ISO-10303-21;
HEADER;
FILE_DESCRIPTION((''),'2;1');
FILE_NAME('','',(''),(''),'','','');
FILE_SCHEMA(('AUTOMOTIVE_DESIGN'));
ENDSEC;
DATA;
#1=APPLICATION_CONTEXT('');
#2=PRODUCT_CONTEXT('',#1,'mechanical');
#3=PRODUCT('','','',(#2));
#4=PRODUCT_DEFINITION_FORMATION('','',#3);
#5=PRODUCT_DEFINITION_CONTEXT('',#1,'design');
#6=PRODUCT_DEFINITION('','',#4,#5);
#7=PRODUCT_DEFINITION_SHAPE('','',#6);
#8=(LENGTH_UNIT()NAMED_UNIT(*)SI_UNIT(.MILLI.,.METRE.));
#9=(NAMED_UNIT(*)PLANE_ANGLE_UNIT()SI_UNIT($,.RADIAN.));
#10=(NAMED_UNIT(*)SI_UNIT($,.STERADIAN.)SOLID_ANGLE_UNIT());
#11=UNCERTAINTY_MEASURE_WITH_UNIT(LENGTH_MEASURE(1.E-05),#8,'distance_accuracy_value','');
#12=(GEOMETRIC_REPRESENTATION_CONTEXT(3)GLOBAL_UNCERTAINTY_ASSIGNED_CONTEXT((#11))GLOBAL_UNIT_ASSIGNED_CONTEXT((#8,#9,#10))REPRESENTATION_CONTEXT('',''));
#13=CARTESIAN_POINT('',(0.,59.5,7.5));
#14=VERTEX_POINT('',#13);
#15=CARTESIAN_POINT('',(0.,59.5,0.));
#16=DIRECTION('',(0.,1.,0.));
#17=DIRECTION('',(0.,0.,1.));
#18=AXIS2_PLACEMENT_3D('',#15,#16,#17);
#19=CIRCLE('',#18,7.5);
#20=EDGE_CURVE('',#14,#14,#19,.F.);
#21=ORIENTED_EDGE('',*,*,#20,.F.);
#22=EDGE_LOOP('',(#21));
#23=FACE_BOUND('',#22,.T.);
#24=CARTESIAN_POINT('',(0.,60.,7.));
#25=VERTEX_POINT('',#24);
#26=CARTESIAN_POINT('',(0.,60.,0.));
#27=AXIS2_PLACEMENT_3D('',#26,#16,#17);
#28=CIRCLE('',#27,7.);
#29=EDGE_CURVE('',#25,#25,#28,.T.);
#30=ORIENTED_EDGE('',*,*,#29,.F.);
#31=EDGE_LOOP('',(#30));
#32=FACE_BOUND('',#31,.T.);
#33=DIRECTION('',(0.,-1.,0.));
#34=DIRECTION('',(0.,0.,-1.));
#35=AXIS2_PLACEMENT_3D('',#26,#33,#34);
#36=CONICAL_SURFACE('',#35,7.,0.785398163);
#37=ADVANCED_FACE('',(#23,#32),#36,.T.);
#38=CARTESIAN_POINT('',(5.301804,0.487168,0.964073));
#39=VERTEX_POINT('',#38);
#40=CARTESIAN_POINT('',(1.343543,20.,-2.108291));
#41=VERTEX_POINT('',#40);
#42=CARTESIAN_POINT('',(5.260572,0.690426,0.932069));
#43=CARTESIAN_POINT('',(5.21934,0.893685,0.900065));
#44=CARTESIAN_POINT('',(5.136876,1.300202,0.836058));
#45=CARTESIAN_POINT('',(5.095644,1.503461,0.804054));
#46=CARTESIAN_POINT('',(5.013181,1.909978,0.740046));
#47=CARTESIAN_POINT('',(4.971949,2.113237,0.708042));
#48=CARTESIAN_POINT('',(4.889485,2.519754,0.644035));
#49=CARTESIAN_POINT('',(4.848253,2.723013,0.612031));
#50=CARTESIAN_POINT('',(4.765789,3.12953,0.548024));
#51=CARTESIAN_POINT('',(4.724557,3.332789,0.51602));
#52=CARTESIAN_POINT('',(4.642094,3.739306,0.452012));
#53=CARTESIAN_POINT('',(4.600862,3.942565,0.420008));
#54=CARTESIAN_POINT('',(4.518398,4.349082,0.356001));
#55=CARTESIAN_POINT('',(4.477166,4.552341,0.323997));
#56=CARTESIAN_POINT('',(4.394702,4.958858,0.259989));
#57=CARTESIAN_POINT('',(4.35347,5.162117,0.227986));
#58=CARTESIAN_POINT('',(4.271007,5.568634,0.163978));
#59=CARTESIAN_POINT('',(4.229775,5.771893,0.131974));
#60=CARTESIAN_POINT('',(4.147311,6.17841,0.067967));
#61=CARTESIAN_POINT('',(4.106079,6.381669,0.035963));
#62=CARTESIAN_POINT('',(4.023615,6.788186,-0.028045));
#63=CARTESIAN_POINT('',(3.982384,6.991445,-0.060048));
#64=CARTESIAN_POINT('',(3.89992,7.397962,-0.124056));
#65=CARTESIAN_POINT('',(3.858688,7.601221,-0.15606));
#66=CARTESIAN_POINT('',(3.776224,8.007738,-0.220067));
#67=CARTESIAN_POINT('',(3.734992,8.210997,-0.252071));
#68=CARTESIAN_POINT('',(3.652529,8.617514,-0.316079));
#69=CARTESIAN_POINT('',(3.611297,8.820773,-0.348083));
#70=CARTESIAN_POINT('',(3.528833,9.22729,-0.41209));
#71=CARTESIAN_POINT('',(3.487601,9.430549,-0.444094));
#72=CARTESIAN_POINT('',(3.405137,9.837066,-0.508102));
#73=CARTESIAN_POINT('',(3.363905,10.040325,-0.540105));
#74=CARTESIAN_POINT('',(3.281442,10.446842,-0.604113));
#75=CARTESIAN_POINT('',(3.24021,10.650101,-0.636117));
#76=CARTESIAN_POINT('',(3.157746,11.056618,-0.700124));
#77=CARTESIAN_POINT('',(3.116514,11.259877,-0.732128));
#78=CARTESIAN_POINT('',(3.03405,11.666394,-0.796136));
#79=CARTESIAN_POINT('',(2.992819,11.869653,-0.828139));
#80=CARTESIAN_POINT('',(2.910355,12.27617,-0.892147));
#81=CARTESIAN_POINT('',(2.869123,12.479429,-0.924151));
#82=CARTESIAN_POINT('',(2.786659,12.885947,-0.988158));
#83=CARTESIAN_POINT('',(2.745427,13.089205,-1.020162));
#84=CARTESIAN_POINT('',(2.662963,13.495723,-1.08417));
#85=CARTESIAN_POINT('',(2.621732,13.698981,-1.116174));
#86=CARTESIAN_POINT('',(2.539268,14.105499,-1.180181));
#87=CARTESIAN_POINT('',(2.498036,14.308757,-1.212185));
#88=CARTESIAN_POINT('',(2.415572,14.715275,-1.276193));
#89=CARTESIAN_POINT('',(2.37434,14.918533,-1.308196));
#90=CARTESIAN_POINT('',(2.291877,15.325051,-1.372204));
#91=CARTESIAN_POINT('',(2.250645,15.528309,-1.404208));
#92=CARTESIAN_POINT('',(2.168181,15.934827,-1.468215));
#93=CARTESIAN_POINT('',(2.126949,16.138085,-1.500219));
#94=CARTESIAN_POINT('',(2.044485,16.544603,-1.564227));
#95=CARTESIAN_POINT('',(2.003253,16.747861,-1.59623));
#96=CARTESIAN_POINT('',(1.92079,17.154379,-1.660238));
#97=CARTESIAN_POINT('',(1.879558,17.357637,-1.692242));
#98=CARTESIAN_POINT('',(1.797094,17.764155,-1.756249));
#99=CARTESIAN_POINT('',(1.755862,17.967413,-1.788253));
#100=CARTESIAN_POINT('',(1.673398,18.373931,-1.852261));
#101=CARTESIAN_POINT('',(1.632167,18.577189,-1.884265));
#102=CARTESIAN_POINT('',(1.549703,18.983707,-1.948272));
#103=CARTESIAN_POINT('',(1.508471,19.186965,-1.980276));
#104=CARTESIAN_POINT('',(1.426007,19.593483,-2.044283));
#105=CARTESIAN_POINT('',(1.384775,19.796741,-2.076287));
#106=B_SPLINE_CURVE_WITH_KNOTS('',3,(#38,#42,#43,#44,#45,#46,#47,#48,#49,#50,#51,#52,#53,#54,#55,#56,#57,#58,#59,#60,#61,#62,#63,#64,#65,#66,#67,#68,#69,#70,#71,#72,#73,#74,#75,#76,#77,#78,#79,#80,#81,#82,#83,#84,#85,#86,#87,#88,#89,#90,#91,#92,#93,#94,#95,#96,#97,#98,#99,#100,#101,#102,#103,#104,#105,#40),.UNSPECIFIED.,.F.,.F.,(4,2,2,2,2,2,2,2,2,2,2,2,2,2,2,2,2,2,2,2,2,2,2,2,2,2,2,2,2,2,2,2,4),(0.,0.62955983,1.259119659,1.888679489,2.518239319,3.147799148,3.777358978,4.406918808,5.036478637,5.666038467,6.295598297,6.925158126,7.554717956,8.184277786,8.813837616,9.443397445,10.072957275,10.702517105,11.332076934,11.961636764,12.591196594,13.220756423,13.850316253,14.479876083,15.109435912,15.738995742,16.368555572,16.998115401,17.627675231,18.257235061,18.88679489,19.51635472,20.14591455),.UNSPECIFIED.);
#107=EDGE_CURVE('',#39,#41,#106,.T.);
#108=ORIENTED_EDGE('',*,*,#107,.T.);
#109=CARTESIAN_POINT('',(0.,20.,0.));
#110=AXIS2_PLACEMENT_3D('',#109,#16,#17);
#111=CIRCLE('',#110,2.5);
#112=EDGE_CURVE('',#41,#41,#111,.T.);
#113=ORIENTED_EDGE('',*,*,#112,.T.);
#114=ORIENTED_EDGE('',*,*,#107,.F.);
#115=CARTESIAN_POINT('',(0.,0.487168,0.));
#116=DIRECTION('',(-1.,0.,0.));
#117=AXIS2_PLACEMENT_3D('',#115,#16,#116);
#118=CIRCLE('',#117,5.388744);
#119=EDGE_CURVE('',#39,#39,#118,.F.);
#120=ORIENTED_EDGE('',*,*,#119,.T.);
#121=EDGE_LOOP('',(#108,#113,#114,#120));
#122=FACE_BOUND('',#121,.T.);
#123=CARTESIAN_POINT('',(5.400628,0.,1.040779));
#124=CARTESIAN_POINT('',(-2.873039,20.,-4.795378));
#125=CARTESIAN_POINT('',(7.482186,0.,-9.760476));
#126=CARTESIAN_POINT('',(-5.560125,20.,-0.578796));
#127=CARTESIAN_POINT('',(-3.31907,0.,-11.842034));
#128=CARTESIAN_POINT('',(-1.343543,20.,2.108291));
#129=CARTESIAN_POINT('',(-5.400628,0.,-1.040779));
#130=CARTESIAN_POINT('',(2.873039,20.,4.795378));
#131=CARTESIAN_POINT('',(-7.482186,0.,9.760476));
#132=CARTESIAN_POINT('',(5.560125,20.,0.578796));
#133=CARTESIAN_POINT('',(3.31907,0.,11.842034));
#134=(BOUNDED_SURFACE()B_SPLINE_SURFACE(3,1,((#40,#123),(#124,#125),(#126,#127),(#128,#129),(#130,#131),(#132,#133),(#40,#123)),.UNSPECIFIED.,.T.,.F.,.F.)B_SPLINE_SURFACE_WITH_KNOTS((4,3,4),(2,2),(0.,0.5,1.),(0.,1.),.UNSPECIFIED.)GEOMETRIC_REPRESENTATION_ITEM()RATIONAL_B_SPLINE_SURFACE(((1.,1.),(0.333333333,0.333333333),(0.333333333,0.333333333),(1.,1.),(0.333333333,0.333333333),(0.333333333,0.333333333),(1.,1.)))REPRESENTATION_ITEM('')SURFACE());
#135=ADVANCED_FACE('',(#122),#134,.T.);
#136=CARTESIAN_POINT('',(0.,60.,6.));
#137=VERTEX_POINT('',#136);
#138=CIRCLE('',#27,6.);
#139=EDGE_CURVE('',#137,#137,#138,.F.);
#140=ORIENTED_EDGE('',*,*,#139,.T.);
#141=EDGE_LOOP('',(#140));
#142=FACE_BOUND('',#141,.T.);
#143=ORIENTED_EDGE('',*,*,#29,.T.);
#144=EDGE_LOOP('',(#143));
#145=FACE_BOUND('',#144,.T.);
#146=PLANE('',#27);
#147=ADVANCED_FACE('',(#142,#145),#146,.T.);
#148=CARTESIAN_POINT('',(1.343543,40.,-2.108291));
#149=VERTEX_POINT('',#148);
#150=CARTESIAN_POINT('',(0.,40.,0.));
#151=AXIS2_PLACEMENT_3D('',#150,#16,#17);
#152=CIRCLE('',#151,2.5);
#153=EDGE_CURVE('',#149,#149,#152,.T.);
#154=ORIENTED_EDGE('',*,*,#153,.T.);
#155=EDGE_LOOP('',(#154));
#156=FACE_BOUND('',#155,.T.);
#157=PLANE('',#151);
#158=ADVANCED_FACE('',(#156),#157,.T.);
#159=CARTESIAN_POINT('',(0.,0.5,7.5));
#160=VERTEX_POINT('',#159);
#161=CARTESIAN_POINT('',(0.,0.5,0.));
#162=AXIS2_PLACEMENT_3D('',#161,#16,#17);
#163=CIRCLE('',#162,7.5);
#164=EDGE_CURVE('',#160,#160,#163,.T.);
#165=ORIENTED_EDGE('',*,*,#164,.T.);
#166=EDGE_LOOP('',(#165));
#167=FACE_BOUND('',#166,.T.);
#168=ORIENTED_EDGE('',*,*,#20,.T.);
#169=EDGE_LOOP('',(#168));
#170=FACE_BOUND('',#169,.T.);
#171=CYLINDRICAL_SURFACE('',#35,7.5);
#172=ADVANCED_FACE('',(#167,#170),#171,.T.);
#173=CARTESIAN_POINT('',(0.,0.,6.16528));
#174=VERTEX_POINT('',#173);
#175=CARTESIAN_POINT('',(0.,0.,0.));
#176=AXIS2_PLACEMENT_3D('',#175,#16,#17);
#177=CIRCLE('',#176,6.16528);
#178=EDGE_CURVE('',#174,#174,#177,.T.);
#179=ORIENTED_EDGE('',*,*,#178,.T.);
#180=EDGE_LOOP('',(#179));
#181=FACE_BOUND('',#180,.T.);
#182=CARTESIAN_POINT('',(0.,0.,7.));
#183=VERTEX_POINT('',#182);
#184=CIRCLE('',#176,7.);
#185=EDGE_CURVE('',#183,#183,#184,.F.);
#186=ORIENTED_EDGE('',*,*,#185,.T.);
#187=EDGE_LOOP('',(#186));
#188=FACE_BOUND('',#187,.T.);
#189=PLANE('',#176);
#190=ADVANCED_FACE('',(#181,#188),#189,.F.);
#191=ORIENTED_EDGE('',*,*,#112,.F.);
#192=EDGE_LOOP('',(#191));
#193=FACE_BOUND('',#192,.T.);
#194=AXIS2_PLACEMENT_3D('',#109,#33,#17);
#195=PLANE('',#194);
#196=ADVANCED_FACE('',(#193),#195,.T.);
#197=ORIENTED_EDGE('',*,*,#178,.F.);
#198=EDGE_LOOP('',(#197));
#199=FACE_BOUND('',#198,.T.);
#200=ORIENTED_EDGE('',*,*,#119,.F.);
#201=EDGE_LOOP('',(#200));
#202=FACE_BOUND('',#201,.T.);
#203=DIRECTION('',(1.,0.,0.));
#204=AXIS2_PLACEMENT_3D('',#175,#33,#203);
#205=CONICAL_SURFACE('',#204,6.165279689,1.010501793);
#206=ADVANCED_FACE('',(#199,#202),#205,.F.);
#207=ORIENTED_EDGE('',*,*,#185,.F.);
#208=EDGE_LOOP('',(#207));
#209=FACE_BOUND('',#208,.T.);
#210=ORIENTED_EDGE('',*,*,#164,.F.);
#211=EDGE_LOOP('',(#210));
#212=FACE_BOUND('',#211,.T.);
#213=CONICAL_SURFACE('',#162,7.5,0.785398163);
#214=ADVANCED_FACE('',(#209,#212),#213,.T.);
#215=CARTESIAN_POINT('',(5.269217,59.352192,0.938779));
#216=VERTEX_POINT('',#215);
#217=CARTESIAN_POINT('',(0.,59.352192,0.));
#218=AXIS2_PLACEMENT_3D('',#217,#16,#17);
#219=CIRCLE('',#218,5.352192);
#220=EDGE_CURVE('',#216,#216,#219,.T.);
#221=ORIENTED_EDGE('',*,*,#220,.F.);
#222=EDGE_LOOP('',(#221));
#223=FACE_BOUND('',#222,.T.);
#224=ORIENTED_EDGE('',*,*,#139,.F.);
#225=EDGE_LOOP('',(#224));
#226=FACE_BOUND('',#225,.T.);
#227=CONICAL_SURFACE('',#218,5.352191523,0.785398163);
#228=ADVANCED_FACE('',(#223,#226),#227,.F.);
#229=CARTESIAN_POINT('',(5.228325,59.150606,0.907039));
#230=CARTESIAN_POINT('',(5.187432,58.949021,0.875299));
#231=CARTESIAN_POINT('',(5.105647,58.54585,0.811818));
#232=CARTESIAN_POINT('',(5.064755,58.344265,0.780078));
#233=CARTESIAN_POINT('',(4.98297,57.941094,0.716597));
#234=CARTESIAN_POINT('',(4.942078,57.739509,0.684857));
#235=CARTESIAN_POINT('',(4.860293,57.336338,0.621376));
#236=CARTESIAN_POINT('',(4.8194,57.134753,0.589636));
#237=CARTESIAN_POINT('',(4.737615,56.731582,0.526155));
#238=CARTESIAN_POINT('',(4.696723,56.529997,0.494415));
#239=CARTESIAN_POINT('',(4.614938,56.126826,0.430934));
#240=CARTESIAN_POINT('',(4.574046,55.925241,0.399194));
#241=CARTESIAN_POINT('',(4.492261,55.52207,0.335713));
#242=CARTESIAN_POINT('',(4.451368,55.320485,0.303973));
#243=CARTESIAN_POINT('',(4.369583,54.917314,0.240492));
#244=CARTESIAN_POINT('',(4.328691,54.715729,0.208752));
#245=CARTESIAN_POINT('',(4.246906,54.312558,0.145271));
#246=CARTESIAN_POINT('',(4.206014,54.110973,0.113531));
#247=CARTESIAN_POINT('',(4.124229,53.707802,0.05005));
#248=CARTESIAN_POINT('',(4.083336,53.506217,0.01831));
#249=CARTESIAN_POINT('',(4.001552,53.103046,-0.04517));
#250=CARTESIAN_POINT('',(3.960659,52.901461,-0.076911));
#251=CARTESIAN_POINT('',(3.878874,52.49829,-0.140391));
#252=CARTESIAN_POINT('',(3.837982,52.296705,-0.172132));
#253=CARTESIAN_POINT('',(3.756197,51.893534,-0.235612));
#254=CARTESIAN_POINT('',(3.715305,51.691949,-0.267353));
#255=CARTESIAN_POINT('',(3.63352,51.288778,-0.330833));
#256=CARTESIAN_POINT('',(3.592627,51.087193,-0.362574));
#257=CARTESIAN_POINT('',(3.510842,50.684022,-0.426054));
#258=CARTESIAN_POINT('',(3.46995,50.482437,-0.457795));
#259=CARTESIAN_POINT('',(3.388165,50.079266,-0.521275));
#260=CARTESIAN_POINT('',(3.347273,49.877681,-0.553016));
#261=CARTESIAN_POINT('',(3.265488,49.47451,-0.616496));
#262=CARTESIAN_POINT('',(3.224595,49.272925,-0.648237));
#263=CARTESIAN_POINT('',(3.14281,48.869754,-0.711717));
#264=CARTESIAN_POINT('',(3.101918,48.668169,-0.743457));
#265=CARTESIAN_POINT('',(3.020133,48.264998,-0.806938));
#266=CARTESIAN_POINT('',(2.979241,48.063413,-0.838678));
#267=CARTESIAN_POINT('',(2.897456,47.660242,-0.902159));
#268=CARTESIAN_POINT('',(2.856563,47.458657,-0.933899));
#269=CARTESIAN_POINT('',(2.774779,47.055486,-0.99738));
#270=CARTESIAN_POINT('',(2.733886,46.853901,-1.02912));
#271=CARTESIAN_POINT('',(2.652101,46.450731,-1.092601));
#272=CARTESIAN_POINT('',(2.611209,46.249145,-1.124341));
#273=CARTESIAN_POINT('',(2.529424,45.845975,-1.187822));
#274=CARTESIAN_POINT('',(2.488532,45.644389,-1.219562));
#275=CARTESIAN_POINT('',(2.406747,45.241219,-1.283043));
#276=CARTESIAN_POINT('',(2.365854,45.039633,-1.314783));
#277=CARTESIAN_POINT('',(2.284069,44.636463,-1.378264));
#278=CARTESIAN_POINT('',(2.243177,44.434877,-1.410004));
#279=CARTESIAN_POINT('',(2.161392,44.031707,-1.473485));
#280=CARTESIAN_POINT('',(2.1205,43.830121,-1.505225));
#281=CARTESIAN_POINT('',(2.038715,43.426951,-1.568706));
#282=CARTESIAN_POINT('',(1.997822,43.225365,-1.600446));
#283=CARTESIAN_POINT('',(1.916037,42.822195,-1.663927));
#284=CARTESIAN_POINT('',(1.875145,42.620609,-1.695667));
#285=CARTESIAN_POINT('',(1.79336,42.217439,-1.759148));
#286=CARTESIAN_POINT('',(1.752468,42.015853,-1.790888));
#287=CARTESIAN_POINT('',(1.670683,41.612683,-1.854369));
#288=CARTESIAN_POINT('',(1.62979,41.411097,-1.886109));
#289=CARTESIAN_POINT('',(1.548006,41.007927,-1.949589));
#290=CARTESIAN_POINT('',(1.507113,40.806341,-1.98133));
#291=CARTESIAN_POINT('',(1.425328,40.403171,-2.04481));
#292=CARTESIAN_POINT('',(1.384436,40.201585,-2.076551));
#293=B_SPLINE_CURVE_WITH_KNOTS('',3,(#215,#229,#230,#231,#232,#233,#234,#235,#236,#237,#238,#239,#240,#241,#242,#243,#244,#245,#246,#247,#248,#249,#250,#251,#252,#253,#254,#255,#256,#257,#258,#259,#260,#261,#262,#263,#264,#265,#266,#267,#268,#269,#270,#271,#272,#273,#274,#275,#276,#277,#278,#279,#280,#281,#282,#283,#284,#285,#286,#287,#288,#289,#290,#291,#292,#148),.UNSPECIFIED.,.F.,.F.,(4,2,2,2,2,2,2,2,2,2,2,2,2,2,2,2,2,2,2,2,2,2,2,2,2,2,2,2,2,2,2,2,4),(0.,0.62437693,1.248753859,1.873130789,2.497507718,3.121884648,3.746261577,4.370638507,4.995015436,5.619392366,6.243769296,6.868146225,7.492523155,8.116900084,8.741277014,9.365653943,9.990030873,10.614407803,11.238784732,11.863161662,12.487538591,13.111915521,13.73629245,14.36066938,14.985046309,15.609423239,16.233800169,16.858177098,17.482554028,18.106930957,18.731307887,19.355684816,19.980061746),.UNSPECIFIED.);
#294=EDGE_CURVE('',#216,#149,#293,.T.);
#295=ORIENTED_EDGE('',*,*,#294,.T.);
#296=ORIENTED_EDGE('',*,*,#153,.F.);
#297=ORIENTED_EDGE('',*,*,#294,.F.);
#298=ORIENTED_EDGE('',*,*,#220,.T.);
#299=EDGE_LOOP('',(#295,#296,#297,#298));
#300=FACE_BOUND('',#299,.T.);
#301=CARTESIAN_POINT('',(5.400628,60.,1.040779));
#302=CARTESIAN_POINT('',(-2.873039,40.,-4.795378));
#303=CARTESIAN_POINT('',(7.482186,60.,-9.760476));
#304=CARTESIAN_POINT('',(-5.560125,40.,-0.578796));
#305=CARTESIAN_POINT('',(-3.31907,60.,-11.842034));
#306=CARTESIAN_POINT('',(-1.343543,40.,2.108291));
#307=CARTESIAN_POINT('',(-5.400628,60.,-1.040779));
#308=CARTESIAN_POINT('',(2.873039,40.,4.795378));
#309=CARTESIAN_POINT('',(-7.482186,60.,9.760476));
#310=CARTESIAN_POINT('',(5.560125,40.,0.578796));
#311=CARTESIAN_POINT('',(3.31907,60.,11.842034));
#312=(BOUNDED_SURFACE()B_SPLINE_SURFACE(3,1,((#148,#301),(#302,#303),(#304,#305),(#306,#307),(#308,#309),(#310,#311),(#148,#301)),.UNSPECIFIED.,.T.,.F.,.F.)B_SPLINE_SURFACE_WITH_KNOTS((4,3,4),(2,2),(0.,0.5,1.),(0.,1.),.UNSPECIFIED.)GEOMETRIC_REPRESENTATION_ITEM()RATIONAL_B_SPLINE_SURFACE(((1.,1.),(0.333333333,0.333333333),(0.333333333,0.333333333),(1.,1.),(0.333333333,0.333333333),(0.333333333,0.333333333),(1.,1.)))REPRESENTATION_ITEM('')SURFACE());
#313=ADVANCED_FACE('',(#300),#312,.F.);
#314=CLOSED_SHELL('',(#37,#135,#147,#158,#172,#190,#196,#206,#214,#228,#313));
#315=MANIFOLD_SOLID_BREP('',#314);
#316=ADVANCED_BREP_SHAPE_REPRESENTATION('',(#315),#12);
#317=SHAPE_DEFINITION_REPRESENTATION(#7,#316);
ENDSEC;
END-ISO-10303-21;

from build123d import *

# Parameters (mm, degrees)
CROQUIS1_R              = 7.5
SALIENTE_EXTRUIR1_DEPTH = 60
CHAFL_N2_SIZE           = 0.5
CHAFL_N2_SIZE_2         = 0.665279689


with BuildPart() as part:
    # Croquis1 → Saliente-Extruir1 (new body)
    with BuildSketch(Plane(origin=(0, 0, 0), x_dir=(1, 0, 0), z_dir=(0, 1, 0))):
        with Locations(Location((0, 0, 0), (0, 0, 270))):
            Circle(CROQUIS1_R)
    extrude(amount=SALIENTE_EXTRUIR1_DEPTH)

    # Cortar-Recubrir2: read off the stored shape, not the designer's step
    # Cortar-Recubrir2: loft between two sections, ruled curve by curve
    cortar_recubrir2_from = [
        Edge.make_bspline([(1.343543407, 40, -2.108291041), (-2.873038675, 40, -4.795377855), (-5.560125489, 40, -0.578795773), (-1.343543407, 40, 2.108291041), (2.873038675, 40, 4.795377855), (5.560125489, 40, 0.578795773), (1.343543407, 40, -2.108291041)], [0, 0, 0, 0, 0.5, 0.5, 0.5, 1, 1, 1, 1], 3, [1, 0.333333333, 0.333333333, 1, 0.333333333, 0.333333333, 1]),
    ]
    cortar_recubrir2_to = [
        Edge.make_bspline([(5.400627652, 60, 1.040779016), (7.482185685, 60, -9.760476288), (-3.319069619, 60, -11.842034321), (-5.400627652, 60, -1.040779016), (-7.482185685, 60, 9.760476288), (3.319069619, 60, 11.842034321), (5.400627652, 60, 1.040779016)], [0, 0, 0, 0, 0.5, 0.5, 0.5, 1, 1, 1, 1], 3, [1, 0.333333333, 0.333333333, 1, 0.333333333, 0.333333333, 1]),
    ]
    cortar_recubrir2 = Solid(Shell([*[Face.make_surface_from_curves(cortar_recubrir2_from[k], cortar_recubrir2_to[k]) for k in range(1)], Face(Wire(cortar_recubrir2_from)), Face(Wire(cortar_recubrir2_to))]))
    add(cortar_recubrir2, mode=Mode.SUBTRACT)

    # Chaflán1
    # the kernel refuses this chamfer: 0.665279689, 0.5 mm, written as the material it takes off along each edge
    with BuildSketch(Plane(origin=(0, 60, 0), x_dir=(0, 0, 1), z_dir=(-1, 0, 0))) as chafl_n1_piece_1:
        with BuildLine():
            Line((7.514142136, -0.514142136), (6.985857864, 0.014142136))
            Line((6.985857864, 0.014142136), (6.985857864, 0.024142136))
            ThreePointArc((6.985857864, 0.024142136), (7.242928932, 0.01), (7.5, 0.01))
            Line((7.5, 0.01), (7.51, 0))
            ThreePointArc((7.51, 0), (7.51, -0.257071068), (7.524142136, -0.514142136))
            Line((7.524142136, -0.514142136), (7.514142136, -0.514142136))
        make_face()
    revolve(axis=Axis((0, 60, 0), (0, 1, 0)), mode=Mode.SUBTRACT)
    with BuildSketch(Plane(origin=(0, 60, 0), x_dir=(0.9819323004404472, 1.2918958832590882e-15, 0.18923254834127032), z_dir=(-0.18923254834127032, 0, 0.9819323004404472))) as chafl_n1_piece_2:
        with BuildLine():
            Line((6.018807954, 0.018825944), (5.333201213, -0.667436596))
            Line((5.333201213, -0.667436596), (5.320226638, -0.664487154))
            ThreePointArc((5.320226638, -0.664487154), (5.410397761, -0.332303159), (5.487030093, 0.002969907))
            Line((5.487030093, 0.002969907), (5.5, 0.013305594))
            ThreePointArc((5.5, 0.013305594), (5.759403977, 0.013305594), (6.018807954, 0.032131538))
            Line((6.018807954, 0.032131538), (6.018807954, 0.018825944))
        make_face()
    revolve(axis=Axis((0, 60, 0), (0, 1, 0)), mode=Mode.SUBTRACT)

    # Simetría7: Cortar-Recubrir2 across plane
    add(cortar_recubrir2.mirror(Plane(origin=(0, 30, 0), x_dir=(0, 0, 1), z_dir=(0, -1, 0))), mode=Mode.SUBTRACT)

    # Chaflán2
    # the kernel refuses this chamfer: 0.665279689, 0.5 mm, written as the material it takes off along each edge
    with BuildSketch(Plane(origin=(0, 0, 0), x_dir=(0, 0, 1), z_dir=(-1, 0, 0))) as chafl_n2_piece_1:
        Polygon((7.5, CHAFL_N2_SIZE), (7.5 - CHAFL_N2_SIZE, 0), (7.5, 0), align=None)
    revolve(axis=Axis((0, 0, 0), (0, 1, 0)), mode=Mode.SUBTRACT)
    with BuildSketch(Plane(origin=(0, 0, 0), x_dir=(0.9819323004404472, 0, 0.18923254834127032), z_dir=(-0.18923254834127032, 0, 0.9819323004404472))) as chafl_n2_piece_2:
        with BuildLine():
            Line((5.5 + CHAFL_N2_SIZE_2, 0), (5.5 - CHAFL_N2_SIZE * 0.22264139859, CHAFL_N2_SIZE * 0.974900409085))
            ThreePointArc((5.5 - CHAFL_N2_SIZE * 0.22264139859, CHAFL_N2_SIZE * 0.974900409085), (5.442174309, 0.252877674), (5.5, 0))
            Line((5.5, 0), (5.5 + CHAFL_N2_SIZE_2, 0))
        make_face()
    revolve(axis=Axis((0, 0, 0), (0, 1, 0)), mode=Mode.SUBTRACT)


solid = part.part
